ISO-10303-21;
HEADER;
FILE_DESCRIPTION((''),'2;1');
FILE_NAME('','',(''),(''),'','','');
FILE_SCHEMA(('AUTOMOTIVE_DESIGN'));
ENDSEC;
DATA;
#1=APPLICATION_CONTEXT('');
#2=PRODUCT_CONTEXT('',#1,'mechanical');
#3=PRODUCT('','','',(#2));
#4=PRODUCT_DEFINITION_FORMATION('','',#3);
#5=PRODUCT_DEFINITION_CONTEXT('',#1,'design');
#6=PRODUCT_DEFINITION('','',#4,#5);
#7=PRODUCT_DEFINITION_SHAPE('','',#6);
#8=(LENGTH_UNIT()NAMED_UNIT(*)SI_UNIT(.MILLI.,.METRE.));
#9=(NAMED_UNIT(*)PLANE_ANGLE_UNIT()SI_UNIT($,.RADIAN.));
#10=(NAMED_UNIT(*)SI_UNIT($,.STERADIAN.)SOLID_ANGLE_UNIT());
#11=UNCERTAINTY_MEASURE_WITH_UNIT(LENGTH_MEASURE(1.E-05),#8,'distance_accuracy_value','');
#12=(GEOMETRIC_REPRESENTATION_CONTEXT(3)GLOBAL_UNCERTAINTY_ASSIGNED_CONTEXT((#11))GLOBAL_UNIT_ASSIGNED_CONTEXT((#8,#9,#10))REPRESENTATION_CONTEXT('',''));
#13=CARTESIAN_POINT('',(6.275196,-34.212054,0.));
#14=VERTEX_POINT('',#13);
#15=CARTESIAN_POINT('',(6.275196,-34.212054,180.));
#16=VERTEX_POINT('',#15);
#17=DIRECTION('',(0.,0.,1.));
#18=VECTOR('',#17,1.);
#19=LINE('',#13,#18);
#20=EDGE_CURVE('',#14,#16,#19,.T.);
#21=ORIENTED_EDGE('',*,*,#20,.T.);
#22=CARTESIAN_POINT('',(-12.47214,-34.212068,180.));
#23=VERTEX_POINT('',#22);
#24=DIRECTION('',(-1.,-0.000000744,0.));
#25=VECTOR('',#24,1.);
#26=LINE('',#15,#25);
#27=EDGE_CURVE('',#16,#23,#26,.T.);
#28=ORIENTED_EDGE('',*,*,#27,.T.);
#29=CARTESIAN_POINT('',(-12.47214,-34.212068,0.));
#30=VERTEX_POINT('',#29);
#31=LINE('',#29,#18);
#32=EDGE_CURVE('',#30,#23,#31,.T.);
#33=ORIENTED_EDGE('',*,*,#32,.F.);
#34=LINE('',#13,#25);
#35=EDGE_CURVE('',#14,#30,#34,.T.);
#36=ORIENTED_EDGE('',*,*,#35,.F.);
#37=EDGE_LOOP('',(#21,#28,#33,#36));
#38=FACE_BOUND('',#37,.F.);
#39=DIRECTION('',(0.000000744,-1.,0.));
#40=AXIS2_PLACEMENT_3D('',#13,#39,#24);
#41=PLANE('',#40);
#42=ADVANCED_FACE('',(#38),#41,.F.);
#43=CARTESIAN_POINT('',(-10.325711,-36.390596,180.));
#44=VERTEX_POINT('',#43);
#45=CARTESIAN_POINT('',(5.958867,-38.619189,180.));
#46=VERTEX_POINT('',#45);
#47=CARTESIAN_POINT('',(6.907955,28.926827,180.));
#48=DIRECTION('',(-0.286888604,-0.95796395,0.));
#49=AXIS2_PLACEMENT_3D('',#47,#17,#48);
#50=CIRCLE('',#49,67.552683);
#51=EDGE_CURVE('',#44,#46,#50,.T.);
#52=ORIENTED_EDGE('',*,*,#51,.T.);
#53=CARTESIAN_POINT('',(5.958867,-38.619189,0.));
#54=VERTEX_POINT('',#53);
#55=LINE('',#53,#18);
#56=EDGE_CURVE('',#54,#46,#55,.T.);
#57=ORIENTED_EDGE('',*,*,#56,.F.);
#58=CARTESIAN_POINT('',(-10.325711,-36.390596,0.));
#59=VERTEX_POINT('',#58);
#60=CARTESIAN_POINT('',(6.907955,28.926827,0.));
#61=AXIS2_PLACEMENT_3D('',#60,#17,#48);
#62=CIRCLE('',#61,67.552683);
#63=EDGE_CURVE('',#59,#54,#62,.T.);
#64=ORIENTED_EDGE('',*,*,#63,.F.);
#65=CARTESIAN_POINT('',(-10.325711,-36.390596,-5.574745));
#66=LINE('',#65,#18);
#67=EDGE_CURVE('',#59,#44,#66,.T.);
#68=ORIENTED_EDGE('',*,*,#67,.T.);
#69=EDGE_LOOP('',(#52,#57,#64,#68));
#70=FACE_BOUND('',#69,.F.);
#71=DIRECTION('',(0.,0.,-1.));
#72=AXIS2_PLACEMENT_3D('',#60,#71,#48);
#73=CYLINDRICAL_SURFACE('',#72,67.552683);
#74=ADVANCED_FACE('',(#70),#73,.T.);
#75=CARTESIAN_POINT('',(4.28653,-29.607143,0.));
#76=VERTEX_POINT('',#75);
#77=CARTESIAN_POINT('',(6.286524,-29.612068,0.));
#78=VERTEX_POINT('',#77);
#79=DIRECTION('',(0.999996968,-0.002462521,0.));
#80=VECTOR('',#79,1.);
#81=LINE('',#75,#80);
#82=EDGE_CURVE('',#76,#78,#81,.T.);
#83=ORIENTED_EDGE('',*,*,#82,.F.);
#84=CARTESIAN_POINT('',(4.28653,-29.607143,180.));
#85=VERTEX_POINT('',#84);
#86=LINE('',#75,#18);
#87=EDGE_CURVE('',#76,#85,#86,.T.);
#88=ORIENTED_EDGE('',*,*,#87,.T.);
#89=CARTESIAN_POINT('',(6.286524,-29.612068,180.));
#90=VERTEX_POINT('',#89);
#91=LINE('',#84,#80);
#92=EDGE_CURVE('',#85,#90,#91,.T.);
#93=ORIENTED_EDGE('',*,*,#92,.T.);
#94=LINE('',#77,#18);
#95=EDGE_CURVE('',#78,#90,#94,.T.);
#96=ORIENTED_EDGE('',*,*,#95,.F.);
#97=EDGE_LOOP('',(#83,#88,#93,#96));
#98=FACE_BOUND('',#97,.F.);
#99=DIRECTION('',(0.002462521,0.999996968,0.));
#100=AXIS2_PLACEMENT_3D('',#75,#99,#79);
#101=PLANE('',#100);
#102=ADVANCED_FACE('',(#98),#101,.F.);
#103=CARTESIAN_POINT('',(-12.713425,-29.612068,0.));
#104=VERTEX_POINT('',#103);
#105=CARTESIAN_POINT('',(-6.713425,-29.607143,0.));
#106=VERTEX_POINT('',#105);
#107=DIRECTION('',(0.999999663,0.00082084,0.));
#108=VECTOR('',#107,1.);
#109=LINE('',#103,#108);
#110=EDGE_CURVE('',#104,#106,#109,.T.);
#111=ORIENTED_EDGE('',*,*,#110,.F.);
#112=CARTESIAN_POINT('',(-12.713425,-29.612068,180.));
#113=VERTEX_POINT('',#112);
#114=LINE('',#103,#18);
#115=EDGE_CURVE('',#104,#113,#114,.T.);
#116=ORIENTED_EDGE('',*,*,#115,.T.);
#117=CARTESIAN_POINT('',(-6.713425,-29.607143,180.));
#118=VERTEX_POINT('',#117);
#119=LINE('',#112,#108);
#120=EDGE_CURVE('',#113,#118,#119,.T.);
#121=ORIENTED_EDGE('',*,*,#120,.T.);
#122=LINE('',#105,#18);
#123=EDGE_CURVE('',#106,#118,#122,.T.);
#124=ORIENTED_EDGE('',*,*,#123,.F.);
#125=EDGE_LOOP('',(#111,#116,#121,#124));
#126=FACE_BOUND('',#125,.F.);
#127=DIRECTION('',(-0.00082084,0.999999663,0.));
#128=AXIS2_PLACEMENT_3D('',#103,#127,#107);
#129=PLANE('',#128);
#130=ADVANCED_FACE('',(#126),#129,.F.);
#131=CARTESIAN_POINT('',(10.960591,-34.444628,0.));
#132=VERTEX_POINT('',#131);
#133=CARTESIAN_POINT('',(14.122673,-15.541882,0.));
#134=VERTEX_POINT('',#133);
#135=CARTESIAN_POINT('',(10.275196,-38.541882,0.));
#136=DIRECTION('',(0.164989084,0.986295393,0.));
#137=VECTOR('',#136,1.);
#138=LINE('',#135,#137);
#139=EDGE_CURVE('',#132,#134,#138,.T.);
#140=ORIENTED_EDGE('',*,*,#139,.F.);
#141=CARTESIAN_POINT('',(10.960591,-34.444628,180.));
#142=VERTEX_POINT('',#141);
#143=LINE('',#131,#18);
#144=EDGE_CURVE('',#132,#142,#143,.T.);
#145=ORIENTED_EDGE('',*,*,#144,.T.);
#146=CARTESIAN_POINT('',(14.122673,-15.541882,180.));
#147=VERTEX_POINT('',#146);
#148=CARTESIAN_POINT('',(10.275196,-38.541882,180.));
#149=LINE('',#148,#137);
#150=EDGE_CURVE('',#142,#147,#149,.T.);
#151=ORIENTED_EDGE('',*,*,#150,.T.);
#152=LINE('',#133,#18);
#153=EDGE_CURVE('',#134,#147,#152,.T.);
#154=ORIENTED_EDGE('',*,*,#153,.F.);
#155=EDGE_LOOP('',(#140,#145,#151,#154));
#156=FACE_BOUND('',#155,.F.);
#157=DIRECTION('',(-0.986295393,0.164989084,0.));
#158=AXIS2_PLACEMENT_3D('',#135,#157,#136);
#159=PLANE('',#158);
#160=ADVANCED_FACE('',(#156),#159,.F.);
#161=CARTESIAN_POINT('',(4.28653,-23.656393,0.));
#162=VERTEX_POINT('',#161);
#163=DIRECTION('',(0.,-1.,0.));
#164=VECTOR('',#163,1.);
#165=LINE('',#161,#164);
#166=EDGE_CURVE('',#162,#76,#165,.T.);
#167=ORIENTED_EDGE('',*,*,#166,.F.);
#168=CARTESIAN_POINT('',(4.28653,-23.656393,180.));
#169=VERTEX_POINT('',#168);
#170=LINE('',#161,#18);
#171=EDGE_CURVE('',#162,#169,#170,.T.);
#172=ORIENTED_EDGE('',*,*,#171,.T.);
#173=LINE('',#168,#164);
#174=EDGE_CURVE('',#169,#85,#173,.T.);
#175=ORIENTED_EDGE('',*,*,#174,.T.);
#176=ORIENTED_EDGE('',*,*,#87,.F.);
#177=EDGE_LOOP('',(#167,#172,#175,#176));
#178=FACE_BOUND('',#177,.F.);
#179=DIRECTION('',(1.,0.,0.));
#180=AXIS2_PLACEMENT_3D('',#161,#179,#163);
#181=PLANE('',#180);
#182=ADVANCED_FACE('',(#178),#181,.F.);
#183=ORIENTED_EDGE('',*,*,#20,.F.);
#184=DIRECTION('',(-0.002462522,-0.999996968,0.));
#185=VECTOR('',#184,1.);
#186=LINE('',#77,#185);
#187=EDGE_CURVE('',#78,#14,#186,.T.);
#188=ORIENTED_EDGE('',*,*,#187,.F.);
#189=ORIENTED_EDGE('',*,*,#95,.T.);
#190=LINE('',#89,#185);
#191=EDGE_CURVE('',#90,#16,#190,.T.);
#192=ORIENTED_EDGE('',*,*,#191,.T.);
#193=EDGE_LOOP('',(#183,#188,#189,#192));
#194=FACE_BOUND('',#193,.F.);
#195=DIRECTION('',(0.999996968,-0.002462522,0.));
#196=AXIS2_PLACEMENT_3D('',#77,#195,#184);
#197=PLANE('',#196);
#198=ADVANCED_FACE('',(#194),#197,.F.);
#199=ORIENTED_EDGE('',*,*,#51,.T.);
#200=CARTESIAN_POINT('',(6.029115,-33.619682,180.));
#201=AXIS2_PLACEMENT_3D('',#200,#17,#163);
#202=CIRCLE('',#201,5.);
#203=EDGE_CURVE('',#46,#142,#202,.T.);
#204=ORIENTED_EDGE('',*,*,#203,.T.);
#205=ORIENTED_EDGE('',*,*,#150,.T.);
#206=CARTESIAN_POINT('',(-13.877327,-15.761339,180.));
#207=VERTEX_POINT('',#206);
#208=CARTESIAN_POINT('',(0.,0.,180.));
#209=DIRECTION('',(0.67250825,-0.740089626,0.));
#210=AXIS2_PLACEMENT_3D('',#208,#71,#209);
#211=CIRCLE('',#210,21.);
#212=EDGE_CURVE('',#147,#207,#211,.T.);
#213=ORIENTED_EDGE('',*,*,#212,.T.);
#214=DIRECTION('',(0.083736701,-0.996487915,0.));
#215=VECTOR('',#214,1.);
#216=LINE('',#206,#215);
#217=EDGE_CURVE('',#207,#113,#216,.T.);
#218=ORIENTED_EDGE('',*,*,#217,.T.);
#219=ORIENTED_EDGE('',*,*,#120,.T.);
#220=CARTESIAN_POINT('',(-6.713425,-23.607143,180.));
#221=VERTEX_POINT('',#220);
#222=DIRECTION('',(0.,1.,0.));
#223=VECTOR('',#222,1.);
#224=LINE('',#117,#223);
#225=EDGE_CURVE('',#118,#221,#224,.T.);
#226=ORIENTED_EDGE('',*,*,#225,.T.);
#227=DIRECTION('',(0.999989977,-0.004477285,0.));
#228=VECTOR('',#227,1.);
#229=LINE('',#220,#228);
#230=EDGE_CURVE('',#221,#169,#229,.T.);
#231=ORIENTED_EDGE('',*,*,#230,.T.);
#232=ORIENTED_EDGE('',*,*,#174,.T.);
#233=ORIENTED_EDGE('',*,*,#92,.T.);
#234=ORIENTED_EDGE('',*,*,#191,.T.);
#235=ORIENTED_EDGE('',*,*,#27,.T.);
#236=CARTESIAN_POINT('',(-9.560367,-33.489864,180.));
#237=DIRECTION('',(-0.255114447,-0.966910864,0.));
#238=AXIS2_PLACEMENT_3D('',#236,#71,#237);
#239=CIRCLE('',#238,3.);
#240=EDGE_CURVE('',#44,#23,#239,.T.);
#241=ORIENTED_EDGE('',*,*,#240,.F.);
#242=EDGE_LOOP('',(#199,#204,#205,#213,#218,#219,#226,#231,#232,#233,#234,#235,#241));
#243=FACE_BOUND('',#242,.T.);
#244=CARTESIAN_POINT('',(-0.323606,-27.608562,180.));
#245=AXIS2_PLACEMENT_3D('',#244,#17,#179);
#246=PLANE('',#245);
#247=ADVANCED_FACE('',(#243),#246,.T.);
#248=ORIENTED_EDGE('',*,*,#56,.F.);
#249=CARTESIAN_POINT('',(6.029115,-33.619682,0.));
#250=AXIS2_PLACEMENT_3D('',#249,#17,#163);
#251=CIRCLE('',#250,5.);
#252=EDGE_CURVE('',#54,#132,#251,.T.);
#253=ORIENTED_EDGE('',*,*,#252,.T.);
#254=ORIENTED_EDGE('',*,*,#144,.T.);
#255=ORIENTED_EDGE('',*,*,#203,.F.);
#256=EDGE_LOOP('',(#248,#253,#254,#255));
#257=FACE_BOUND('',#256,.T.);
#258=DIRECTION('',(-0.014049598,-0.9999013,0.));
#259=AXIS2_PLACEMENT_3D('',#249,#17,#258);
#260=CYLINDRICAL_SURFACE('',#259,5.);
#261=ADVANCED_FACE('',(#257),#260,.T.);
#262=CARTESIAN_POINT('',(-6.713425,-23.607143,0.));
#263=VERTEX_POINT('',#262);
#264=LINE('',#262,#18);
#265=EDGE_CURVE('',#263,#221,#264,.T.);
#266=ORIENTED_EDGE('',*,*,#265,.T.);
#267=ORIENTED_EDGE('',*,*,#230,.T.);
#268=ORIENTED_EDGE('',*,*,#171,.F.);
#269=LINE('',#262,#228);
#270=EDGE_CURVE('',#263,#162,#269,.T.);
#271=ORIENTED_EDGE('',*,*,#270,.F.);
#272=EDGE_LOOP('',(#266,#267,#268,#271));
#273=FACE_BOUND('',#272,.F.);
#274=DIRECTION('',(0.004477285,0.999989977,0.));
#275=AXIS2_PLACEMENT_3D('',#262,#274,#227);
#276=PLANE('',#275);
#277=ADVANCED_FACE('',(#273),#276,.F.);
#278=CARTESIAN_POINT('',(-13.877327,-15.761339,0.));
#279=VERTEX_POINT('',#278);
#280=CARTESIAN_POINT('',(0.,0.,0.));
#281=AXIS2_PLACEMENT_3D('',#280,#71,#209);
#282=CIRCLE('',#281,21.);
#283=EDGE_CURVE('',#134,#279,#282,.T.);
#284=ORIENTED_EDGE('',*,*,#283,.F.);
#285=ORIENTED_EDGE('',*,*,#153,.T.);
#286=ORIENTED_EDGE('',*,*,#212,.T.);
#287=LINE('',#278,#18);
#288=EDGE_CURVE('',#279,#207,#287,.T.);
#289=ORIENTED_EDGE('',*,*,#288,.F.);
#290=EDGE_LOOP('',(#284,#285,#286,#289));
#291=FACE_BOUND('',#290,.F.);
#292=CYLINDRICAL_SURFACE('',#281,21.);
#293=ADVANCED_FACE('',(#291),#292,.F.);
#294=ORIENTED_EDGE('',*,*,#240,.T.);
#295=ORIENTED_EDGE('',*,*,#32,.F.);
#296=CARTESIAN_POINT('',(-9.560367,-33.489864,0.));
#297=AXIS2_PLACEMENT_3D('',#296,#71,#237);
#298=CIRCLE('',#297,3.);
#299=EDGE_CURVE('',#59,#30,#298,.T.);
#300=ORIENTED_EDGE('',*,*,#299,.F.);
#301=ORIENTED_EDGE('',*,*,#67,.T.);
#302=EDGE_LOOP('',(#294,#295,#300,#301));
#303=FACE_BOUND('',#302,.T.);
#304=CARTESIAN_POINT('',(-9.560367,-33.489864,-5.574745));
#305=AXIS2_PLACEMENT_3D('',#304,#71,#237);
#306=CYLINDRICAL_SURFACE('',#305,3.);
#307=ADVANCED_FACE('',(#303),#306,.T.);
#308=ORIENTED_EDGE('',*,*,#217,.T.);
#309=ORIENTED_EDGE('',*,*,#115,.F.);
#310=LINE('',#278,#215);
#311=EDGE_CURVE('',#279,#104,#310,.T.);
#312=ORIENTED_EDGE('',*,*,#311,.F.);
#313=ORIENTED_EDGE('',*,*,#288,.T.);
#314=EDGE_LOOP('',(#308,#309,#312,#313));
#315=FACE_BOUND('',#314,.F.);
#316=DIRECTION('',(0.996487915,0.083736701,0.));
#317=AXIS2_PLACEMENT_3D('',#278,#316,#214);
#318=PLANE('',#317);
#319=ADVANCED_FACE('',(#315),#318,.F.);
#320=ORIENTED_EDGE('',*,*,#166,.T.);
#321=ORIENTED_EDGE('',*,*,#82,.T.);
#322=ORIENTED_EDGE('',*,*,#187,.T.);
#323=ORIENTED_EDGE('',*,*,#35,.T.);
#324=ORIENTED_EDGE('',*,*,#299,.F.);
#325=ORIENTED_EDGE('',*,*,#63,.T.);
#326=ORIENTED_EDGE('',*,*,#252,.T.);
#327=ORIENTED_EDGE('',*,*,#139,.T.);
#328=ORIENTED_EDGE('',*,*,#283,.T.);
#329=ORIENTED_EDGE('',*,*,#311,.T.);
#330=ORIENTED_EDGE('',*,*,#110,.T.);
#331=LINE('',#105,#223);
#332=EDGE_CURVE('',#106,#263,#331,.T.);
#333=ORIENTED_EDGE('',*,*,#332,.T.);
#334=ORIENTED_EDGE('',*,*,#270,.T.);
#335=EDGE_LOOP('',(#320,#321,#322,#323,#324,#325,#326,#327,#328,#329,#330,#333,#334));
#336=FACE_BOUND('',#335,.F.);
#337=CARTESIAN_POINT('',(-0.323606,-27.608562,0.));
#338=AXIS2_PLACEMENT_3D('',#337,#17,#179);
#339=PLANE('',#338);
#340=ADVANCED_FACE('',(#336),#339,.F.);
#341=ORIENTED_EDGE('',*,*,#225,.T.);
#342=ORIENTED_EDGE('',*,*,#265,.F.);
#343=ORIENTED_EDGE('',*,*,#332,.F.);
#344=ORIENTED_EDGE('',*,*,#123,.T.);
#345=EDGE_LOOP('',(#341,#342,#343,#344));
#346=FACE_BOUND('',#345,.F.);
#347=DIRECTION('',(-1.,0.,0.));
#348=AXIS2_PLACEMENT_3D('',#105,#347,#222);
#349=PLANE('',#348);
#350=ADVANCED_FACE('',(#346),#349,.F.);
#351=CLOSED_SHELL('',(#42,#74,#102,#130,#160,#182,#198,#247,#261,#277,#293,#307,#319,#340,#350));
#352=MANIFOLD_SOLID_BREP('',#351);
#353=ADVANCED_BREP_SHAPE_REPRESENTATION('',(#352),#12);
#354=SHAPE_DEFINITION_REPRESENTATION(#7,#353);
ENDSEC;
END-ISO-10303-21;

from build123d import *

# Parameters (mm, degrees)
F1_DEPTH    = 180
F2_R        = 5
F3_T1_DEPTH = 191.1494898741


# Not quite as in the source:
# - a fillet or chamfer that OpenCascade refuses, or shapes differently, is made with other operations: its cross-section is extruded or revolved along the edge and cut away or added


with BuildPart() as f1:
    # F0 (on Top) → F1 (new body)
    with BuildSketch(Plane.XY):
        with BuildLine():
            ThreePointArc((14.1226732436, -15.5418821401), (0.1645874713, -20.9993550131), (-13.8773267564, -15.7613388421))
            Line((-13.8773267564, -15.7613388421), (-12.7134246975, -29.6120676683))
            Line((-12.7134246975, -29.6120676683), (-6.7134246975, -29.6071426253))
            Line((-6.7134246975, -29.6071426253), (-6.7134246975, -23.6071426253))
            Line((-6.7134246975, -23.6071426253), (4.2865298223, -23.6563930556))
            Line((4.2865298223, -23.6563930556), (4.2865298223, -29.6071426253))
            Line((4.2865298223, -29.6071426253), (6.2865237583, -29.6120676683))
            Line((6.2865237583, -29.6120676683), (6.2751961593, -34.2120537211))
            Line((6.2751961593, -34.2120537211), (-12.4721404334, -34.2120676683))
            Line((-12.4721404334, -34.2120676683), (-12.4721404334, -35.7862083692))
            ThreePointArc((-12.4721404334, -35.7862083692), (-1.2161640349, -38.1355598231), (10.2751961593, -38.5418821401))
            Line((10.2751961593, -38.5418821401), (14.1226732436, -15.5418821401))
        make_face()
    extrude(amount=F1_DEPTH)

    # F2
    f2_edges = [f1.edges().sort_by_distance(p)[0] for p in [
        (10.275196, -38.541882, 90),
    ]]
    fillet(f2_edges, radius=F2_R)

    # F3: fillet of radius 3 on 1 edges, made by hand

    # F3_s2 → F3_t1 (cut)
    with BuildSketch(Plane.XY.offset(-5.5747449371)):
        with BuildLine():
            ThreePointArc((-10.3257108334, -36.3905964487), (-11.6973730961, -35.5953820953), (-12.4721404334, -34.2120676683))
            Line((-12.4721404334, -34.2120676683), (-12.4721404334, -35.7862083692))
            ThreePointArc((-12.4721404334, -35.7862083692), (-11.4014196416, -36.0972596534), (-10.3257108334, -36.3905964487))
        make_face()
    extrude(amount=F3_T1_DEPTH, mode=Mode.SUBTRACT)


solid = f1.part
